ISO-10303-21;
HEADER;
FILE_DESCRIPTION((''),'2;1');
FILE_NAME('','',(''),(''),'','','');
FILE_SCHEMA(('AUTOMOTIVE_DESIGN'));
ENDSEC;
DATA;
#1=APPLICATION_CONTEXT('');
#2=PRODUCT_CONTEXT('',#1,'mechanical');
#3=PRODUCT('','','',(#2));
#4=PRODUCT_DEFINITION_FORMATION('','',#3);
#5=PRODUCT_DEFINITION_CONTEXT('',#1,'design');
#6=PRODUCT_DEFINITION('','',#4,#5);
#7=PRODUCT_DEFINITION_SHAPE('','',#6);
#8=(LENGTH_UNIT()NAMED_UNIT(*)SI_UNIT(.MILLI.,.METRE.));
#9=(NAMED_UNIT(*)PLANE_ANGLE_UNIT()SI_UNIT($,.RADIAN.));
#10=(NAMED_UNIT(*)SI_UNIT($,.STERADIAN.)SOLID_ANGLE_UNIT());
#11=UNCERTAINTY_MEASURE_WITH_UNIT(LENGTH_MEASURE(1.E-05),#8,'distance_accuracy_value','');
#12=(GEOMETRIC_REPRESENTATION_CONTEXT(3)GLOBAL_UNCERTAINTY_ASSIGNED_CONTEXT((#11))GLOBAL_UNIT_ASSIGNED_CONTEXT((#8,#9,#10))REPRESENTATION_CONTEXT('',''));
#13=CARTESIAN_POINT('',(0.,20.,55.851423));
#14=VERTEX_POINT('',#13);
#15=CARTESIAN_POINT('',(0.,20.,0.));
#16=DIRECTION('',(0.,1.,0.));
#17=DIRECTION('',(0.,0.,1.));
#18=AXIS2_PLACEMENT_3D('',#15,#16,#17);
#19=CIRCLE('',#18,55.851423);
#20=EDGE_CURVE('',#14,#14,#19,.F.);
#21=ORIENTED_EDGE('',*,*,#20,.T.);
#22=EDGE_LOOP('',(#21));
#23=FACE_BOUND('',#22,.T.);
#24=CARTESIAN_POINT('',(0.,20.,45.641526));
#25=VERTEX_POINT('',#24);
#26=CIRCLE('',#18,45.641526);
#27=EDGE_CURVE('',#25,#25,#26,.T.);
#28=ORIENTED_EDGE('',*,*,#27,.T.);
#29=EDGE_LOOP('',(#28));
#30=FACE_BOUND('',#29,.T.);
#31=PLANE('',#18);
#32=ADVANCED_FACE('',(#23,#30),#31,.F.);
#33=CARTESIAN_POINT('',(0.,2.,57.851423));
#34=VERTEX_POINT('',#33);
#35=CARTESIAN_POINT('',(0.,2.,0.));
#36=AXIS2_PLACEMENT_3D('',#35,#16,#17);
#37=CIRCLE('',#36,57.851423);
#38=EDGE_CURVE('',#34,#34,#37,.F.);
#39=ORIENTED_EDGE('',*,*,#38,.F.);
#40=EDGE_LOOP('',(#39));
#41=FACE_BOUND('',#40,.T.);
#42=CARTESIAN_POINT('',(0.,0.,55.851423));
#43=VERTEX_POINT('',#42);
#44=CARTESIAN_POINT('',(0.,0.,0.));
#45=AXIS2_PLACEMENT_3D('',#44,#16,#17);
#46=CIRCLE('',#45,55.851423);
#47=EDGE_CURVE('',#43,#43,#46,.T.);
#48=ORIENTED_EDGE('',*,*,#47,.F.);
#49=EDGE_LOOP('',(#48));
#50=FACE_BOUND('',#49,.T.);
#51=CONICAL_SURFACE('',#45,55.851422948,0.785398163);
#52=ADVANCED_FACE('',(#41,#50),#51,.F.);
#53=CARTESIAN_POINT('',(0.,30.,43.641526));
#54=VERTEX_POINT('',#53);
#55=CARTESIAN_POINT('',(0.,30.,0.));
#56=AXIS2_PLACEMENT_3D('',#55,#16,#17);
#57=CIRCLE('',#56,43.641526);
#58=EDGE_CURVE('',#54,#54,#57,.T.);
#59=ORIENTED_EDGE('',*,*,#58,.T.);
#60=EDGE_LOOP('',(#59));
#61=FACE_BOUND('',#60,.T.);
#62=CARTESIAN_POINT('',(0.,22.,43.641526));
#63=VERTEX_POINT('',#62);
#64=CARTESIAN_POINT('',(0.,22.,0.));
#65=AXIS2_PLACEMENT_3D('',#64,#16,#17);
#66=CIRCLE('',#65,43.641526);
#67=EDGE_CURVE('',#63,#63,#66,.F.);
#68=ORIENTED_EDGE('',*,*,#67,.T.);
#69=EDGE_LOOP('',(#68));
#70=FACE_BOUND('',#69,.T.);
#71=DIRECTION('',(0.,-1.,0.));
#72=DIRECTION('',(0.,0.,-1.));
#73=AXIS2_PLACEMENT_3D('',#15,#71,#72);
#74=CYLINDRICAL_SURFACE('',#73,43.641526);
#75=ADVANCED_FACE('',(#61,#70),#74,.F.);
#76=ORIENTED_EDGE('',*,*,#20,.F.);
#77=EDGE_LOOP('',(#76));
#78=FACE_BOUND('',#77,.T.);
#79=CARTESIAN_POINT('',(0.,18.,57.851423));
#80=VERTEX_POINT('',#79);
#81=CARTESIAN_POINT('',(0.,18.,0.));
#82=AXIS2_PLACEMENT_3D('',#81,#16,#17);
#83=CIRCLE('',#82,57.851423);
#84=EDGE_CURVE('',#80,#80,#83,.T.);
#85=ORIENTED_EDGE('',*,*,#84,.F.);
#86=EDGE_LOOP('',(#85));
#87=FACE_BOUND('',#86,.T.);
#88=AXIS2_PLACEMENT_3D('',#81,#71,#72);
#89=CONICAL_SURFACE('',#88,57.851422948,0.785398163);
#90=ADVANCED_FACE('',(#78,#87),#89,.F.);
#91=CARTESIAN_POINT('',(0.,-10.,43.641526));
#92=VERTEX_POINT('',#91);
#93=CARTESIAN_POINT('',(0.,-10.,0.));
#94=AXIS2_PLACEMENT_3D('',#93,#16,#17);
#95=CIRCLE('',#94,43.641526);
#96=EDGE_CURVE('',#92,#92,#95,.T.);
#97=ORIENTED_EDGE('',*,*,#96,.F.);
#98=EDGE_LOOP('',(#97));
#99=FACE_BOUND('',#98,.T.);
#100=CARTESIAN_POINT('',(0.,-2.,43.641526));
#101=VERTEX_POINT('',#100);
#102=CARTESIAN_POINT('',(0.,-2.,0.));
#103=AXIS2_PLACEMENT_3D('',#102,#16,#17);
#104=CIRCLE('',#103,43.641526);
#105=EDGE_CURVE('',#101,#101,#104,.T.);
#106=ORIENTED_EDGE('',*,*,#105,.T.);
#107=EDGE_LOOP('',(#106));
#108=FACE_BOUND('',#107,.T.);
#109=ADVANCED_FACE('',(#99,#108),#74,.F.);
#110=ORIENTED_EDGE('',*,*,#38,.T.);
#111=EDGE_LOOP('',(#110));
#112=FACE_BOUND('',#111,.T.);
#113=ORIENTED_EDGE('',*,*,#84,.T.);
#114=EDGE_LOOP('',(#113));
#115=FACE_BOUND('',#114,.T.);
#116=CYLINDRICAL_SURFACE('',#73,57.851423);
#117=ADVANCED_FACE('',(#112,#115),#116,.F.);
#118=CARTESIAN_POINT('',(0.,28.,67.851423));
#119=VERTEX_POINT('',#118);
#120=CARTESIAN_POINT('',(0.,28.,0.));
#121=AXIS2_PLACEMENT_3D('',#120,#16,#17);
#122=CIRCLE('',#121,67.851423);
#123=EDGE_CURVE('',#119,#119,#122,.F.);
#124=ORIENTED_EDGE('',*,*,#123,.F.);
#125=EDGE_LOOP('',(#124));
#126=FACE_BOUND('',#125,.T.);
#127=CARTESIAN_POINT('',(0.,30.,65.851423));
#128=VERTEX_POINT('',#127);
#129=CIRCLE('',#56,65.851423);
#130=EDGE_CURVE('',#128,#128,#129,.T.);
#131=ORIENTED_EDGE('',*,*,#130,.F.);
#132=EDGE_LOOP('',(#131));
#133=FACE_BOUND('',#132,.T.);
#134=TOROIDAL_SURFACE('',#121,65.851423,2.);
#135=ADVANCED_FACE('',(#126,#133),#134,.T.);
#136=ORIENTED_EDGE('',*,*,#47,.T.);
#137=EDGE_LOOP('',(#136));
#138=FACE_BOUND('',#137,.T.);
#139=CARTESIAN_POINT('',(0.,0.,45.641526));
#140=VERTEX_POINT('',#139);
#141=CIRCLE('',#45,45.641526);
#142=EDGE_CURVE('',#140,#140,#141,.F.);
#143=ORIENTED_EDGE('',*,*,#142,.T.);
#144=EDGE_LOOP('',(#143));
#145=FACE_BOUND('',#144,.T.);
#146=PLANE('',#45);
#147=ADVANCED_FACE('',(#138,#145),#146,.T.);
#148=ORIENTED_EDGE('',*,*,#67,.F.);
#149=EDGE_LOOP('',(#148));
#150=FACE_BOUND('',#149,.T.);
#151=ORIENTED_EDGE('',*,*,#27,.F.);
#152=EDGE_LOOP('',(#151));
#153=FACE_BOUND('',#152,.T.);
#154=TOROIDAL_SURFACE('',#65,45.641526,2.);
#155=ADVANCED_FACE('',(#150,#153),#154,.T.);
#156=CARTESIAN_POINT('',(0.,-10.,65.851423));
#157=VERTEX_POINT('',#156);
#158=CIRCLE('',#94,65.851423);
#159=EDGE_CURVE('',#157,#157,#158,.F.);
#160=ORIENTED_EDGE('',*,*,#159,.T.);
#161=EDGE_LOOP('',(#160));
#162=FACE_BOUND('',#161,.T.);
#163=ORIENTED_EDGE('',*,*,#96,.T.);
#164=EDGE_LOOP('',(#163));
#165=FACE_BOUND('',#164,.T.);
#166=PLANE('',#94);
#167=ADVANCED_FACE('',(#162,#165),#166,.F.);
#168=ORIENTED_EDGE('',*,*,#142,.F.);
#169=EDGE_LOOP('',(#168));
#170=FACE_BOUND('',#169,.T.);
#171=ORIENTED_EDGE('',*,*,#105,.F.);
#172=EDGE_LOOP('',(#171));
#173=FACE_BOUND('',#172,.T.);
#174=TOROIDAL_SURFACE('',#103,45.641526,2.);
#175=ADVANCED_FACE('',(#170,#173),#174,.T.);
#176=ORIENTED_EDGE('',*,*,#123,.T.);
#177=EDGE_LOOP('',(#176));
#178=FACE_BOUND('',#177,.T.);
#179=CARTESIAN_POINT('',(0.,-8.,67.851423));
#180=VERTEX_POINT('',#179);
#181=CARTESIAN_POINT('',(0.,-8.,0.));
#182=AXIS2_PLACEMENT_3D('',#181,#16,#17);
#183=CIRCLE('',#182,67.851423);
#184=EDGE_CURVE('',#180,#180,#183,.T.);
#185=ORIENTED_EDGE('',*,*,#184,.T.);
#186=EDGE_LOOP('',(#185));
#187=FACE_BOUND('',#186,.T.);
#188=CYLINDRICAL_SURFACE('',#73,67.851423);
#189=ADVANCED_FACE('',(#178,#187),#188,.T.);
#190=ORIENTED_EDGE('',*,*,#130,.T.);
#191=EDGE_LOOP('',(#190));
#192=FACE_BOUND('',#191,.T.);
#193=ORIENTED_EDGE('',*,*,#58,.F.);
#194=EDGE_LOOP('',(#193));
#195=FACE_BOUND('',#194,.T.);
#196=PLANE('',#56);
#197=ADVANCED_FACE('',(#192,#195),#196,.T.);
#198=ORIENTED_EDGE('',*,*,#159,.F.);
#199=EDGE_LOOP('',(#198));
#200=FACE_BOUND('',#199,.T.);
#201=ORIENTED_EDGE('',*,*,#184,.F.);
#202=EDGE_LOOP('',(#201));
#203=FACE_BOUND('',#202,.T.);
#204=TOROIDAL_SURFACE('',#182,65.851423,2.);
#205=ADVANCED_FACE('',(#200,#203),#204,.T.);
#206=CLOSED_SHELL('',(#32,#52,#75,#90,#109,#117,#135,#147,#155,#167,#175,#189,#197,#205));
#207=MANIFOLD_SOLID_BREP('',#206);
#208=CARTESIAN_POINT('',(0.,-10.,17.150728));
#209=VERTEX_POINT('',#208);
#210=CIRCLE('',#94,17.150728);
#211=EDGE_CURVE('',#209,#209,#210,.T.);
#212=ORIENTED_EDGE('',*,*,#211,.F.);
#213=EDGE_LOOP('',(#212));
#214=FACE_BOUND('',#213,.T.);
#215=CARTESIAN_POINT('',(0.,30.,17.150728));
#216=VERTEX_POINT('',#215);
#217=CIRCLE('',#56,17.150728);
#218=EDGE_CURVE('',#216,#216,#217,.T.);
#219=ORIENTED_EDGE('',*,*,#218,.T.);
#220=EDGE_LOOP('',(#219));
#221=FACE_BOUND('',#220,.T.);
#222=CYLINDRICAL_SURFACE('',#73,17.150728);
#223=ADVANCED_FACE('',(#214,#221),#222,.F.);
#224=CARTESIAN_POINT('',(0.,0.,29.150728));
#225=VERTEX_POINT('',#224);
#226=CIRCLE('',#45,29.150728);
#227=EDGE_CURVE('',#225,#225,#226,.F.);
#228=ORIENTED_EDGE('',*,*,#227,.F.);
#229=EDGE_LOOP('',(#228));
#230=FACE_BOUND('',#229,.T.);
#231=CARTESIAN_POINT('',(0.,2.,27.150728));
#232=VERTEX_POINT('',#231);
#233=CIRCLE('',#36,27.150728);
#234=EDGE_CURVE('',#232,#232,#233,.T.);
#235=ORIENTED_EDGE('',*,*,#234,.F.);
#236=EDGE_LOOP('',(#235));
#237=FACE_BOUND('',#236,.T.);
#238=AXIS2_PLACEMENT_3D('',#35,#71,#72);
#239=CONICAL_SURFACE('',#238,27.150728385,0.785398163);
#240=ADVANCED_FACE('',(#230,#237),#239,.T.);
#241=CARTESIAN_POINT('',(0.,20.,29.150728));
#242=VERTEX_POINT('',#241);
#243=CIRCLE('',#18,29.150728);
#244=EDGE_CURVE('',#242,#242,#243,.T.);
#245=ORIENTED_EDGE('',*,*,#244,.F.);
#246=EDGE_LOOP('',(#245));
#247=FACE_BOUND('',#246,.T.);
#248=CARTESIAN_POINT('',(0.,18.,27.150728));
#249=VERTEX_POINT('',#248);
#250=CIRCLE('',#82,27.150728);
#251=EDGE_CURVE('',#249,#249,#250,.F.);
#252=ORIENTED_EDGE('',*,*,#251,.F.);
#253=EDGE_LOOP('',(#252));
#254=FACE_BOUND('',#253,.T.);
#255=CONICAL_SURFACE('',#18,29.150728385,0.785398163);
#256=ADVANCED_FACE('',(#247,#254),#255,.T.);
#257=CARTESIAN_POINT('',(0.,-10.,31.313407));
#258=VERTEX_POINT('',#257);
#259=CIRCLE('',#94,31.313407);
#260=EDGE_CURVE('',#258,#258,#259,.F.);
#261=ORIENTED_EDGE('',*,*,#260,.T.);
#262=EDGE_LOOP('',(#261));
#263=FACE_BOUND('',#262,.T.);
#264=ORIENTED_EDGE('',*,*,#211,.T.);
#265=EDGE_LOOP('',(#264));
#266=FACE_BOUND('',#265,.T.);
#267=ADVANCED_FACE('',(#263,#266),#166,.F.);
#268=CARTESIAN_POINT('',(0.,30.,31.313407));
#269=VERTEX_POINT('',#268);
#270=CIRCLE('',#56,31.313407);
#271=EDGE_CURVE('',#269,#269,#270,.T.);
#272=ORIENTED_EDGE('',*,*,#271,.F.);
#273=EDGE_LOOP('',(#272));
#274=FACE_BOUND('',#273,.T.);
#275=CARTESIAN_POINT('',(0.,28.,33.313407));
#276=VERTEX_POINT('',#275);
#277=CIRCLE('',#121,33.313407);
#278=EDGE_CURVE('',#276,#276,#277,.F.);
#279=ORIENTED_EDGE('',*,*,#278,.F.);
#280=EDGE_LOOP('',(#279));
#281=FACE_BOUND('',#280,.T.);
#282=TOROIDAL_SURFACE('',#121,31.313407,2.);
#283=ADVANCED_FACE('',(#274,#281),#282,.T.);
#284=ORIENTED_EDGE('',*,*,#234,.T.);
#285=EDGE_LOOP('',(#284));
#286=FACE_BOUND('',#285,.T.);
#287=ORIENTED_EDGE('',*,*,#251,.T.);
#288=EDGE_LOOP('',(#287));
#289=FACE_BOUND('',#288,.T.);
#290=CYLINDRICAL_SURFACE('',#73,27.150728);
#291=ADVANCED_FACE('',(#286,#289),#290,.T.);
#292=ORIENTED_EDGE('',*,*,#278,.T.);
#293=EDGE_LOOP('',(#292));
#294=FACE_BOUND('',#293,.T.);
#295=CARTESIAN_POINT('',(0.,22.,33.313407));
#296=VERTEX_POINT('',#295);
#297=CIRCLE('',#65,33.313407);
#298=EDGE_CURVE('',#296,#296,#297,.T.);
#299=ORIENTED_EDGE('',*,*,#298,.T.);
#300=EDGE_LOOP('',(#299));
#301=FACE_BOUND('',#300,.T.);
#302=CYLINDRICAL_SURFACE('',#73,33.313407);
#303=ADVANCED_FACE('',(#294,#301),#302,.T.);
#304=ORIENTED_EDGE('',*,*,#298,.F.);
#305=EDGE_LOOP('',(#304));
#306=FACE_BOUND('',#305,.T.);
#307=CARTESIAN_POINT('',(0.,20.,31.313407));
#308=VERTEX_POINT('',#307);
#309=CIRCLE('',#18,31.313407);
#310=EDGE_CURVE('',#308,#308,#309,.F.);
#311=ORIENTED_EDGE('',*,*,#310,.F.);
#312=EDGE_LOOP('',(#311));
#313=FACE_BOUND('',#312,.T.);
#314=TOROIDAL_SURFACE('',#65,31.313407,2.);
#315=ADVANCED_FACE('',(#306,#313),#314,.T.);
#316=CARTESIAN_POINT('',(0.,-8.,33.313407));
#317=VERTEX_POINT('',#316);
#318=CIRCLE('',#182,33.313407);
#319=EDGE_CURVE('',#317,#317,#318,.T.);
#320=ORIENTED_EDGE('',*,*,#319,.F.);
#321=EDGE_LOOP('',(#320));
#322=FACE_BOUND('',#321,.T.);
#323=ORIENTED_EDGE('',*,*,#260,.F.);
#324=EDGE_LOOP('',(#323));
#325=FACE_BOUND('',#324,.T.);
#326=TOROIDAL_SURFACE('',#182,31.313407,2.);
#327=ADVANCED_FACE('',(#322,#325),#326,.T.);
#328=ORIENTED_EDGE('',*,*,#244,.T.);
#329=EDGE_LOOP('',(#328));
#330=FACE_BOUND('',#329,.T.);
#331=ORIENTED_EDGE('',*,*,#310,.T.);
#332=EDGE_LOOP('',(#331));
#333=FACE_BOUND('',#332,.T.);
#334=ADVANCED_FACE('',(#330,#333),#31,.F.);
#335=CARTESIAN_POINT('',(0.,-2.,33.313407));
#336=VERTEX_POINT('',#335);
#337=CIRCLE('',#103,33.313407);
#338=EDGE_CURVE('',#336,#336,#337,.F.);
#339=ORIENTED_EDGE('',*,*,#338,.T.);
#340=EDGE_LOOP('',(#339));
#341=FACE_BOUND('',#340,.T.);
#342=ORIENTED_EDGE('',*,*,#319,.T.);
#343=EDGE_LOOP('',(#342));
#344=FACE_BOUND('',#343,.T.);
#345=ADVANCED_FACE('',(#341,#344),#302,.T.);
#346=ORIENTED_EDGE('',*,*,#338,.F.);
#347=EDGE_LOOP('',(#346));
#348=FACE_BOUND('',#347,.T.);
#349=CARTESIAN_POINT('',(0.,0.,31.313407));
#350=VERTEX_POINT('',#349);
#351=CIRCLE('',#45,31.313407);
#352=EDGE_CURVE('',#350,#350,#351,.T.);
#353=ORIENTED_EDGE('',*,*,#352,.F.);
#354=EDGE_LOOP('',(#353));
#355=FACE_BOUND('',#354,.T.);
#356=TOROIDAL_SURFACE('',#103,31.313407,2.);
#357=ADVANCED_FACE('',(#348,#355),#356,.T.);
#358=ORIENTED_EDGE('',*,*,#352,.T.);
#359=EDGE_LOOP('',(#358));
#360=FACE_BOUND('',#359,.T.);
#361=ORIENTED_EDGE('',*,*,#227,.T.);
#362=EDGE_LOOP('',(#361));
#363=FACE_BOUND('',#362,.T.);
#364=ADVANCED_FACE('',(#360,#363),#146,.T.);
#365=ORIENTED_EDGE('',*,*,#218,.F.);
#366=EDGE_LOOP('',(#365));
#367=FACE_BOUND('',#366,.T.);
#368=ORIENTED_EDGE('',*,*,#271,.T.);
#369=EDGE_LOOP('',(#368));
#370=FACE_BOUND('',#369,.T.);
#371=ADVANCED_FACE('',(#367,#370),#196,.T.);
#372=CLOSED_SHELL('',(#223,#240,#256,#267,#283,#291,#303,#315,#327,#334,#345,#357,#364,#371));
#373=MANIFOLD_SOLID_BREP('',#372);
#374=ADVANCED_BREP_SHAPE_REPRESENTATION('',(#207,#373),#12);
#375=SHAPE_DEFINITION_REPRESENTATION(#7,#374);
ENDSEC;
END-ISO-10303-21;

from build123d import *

# Parameters (mm, degrees)
SKETCH_1_R      = 57.851422948
SKETCH_1_R_2    = 43.64152647
EXTRUDE_1_DEPTH = 20
SKETCH_2_R      = 33.313406782
SKETCH_2_R_2    = 27.150728385
EXTRUDE_2_DEPTH = 20
SHELL_1_T       = 10
SHELL_2_T       = 10
FILLET_1_R      = 2
FILLET_2_R      = 2
FILLET_3_R      = 2
FILLET_4_R      = 2
CHAMFER_1_SIZE  = 2
FILLET_5_R      = 2
CHAMFER_2_SIZE  = 2


with BuildPart() as part:
    # 草图1 → 凸台-拉伸1 (new body)
    with BuildSketch(Plane(origin=(0, 0, 0), x_dir=(1, 0, 0), z_dir=(0, 1, 0))):
        with Locations(Location((0, 0, 0), (0, 0, 270))):
            Circle(SKETCH_1_R)
        with Locations(Location((0, 0, 0), (0, 0, 270))):
            Circle(SKETCH_1_R_2, mode=Mode.SUBTRACT)
    extrude(amount=EXTRUDE_1_DEPTH)

    # 抽壳1
    shell_1_openings = [part.faces().sort_by_distance(p)[0] for p in [
        (0, 10, -43.64152647),
    ]]
    offset(amount=SHELL_1_T, openings=shell_1_openings, kind=Kind.INTERSECTION)

    # 圆角1
    # the kernel refuses this fillet: 2 mm, written as the material it takes off along each edge
    with BuildSketch(Plane(origin=(0, 0, 0), x_dir=(0, 0, 1), z_dir=(-1, 0, 0))) as fillet_1_piece_1:
        with BuildLine():
            CenterArc((43.64152647 + FILLET_1_R, -FILLET_1_R), FILLET_1_R, 90, 90)
            Line((43.64152647, -FILLET_1_R), (43.64152647, 0))
            Line((43.64152647, 0), (43.64152647 + FILLET_1_R, 0))
        make_face()
    revolve(axis=Axis((0, 0, 0), (0, 1, 0)), mode=Mode.SUBTRACT)

    # 圆角2
    fillet_2_edges = [part.edges().sort_by_distance(p)[0] for p in [
        (0, 20, -43.64152647),
    ]]
    fillet(fillet_2_edges, radius=FILLET_2_R)

    # 圆角3
    fillet_3_edges = [part.edges().sort_by_distance(p)[0] for p in [
        (0, 30, -67.851422948),
    ]]
    fillet(fillet_3_edges, radius=FILLET_3_R)

    # 圆角4
    fillet_4_edges = [part.edges().sort_by_distance(p)[0] for p in [
        (0, -10, -67.851422948),
    ]]
    fillet(fillet_4_edges, radius=FILLET_4_R)

    # 倒角1
    chamfer_1_edges = [part.edges().sort_by_distance(p)[0] for p in [
        (0, 20, -57.851422948),
        (0, 0, -57.851422948),
    ]]
    chamfer(chamfer_1_edges, length=CHAMFER_1_SIZE)


with BuildPart() as body_2:
    # 草图2 → 凸台-拉伸2 (new body)
    with BuildSketch(Plane(origin=(0, 0, 0), x_dir=(1, 0, 0), z_dir=(0, 1, 0))):
        with Locations(Location((0, 0, 0), (0, 0, 270))):
            Circle(SKETCH_2_R)
        with Locations(Location((0, 0, 0), (0, 0, 270))):
            Circle(SKETCH_2_R_2, mode=Mode.SUBTRACT)
    extrude(amount=EXTRUDE_2_DEPTH)

    # 抽壳2
    shell_2_openings = [body_2.faces().sort_by_distance(p)[0] for p in [
        (0, 10, -33.313406782),
    ]]
    offset(amount=SHELL_2_T, openings=shell_2_openings, kind=Kind.INTERSECTION)

    # 圆角5
    # the kernel refuses this fillet: 2 mm, written as the material it takes off along each edge
    with BuildSketch(Plane(origin=(0, 20, 0), x_dir=(0, 0, 1), z_dir=(-1, 0, 0))) as fillet_5_piece_1:
        with BuildLine():
            CenterArc((33.313406782 - FILLET_5_R, FILLET_5_R), FILLET_5_R, 270, 90)
            Line((33.313406782, FILLET_5_R), (33.313406782, 0))
            Line((33.313406782, 0), (33.313406782 - FILLET_5_R, 0))
        make_face()
    revolve(axis=Axis((0, 20, 0), (0, 1, 0)), mode=Mode.SUBTRACT)
    with BuildSketch(Plane(origin=(0, 0, 0), x_dir=(0, 0, 1), z_dir=(-1, 0, 0))) as fillet_5_piece_2:
        with BuildLine():
            CenterArc((33.313406782 - FILLET_5_R, -FILLET_5_R), FILLET_5_R, 0, 90)
            Line((33.313406782, -FILLET_5_R), (33.313406782, 0))
            Line((33.313406782, 0), (33.313406782 - FILLET_5_R, 0))
        make_face()
    revolve(axis=Axis((0, 0, 0), (0, 1, 0)), mode=Mode.SUBTRACT)
    with BuildSketch(Plane(origin=(0, -10, 0), x_dir=(0, 0, 1), z_dir=(1, 0, 0))) as fillet_5_piece_3:
        with BuildLine():
            CenterArc((33.313406782 - FILLET_5_R, -FILLET_5_R), FILLET_5_R, 0, 90)
            Line((33.313406782 - FILLET_5_R, 0), (33.313406782, 0))
            Line((33.313406782, 0), (33.313406782, -FILLET_5_R))
        make_face()
    revolve(axis=Axis((0, -10, 0), (0, -1, 0)), mode=Mode.SUBTRACT)
    with BuildSketch(Plane(origin=(0, 30, 0), x_dir=(0, 0, 1), z_dir=(1, 0, 0))) as fillet_5_piece_4:
        with BuildLine():
            CenterArc((33.313406782 - FILLET_5_R, FILLET_5_R), FILLET_5_R, 270, 90)
            Line((33.313406782 - FILLET_5_R, 0), (33.313406782, 0))
            Line((33.313406782, 0), (33.313406782, FILLET_5_R))
        make_face()
    revolve(axis=Axis((0, 30, 0), (0, -1, 0)), mode=Mode.SUBTRACT)

    # 倒角2
    chamfer_2_edges = [body_2.edges().sort_by_distance(p)[0] for p in [
        (0, 0, -27.150728385),
        (0, 20, -27.150728385),
    ]]
    chamfer(chamfer_2_edges, length=CHAMFER_2_SIZE)


solid = Compound([part.part, body_2.part])
